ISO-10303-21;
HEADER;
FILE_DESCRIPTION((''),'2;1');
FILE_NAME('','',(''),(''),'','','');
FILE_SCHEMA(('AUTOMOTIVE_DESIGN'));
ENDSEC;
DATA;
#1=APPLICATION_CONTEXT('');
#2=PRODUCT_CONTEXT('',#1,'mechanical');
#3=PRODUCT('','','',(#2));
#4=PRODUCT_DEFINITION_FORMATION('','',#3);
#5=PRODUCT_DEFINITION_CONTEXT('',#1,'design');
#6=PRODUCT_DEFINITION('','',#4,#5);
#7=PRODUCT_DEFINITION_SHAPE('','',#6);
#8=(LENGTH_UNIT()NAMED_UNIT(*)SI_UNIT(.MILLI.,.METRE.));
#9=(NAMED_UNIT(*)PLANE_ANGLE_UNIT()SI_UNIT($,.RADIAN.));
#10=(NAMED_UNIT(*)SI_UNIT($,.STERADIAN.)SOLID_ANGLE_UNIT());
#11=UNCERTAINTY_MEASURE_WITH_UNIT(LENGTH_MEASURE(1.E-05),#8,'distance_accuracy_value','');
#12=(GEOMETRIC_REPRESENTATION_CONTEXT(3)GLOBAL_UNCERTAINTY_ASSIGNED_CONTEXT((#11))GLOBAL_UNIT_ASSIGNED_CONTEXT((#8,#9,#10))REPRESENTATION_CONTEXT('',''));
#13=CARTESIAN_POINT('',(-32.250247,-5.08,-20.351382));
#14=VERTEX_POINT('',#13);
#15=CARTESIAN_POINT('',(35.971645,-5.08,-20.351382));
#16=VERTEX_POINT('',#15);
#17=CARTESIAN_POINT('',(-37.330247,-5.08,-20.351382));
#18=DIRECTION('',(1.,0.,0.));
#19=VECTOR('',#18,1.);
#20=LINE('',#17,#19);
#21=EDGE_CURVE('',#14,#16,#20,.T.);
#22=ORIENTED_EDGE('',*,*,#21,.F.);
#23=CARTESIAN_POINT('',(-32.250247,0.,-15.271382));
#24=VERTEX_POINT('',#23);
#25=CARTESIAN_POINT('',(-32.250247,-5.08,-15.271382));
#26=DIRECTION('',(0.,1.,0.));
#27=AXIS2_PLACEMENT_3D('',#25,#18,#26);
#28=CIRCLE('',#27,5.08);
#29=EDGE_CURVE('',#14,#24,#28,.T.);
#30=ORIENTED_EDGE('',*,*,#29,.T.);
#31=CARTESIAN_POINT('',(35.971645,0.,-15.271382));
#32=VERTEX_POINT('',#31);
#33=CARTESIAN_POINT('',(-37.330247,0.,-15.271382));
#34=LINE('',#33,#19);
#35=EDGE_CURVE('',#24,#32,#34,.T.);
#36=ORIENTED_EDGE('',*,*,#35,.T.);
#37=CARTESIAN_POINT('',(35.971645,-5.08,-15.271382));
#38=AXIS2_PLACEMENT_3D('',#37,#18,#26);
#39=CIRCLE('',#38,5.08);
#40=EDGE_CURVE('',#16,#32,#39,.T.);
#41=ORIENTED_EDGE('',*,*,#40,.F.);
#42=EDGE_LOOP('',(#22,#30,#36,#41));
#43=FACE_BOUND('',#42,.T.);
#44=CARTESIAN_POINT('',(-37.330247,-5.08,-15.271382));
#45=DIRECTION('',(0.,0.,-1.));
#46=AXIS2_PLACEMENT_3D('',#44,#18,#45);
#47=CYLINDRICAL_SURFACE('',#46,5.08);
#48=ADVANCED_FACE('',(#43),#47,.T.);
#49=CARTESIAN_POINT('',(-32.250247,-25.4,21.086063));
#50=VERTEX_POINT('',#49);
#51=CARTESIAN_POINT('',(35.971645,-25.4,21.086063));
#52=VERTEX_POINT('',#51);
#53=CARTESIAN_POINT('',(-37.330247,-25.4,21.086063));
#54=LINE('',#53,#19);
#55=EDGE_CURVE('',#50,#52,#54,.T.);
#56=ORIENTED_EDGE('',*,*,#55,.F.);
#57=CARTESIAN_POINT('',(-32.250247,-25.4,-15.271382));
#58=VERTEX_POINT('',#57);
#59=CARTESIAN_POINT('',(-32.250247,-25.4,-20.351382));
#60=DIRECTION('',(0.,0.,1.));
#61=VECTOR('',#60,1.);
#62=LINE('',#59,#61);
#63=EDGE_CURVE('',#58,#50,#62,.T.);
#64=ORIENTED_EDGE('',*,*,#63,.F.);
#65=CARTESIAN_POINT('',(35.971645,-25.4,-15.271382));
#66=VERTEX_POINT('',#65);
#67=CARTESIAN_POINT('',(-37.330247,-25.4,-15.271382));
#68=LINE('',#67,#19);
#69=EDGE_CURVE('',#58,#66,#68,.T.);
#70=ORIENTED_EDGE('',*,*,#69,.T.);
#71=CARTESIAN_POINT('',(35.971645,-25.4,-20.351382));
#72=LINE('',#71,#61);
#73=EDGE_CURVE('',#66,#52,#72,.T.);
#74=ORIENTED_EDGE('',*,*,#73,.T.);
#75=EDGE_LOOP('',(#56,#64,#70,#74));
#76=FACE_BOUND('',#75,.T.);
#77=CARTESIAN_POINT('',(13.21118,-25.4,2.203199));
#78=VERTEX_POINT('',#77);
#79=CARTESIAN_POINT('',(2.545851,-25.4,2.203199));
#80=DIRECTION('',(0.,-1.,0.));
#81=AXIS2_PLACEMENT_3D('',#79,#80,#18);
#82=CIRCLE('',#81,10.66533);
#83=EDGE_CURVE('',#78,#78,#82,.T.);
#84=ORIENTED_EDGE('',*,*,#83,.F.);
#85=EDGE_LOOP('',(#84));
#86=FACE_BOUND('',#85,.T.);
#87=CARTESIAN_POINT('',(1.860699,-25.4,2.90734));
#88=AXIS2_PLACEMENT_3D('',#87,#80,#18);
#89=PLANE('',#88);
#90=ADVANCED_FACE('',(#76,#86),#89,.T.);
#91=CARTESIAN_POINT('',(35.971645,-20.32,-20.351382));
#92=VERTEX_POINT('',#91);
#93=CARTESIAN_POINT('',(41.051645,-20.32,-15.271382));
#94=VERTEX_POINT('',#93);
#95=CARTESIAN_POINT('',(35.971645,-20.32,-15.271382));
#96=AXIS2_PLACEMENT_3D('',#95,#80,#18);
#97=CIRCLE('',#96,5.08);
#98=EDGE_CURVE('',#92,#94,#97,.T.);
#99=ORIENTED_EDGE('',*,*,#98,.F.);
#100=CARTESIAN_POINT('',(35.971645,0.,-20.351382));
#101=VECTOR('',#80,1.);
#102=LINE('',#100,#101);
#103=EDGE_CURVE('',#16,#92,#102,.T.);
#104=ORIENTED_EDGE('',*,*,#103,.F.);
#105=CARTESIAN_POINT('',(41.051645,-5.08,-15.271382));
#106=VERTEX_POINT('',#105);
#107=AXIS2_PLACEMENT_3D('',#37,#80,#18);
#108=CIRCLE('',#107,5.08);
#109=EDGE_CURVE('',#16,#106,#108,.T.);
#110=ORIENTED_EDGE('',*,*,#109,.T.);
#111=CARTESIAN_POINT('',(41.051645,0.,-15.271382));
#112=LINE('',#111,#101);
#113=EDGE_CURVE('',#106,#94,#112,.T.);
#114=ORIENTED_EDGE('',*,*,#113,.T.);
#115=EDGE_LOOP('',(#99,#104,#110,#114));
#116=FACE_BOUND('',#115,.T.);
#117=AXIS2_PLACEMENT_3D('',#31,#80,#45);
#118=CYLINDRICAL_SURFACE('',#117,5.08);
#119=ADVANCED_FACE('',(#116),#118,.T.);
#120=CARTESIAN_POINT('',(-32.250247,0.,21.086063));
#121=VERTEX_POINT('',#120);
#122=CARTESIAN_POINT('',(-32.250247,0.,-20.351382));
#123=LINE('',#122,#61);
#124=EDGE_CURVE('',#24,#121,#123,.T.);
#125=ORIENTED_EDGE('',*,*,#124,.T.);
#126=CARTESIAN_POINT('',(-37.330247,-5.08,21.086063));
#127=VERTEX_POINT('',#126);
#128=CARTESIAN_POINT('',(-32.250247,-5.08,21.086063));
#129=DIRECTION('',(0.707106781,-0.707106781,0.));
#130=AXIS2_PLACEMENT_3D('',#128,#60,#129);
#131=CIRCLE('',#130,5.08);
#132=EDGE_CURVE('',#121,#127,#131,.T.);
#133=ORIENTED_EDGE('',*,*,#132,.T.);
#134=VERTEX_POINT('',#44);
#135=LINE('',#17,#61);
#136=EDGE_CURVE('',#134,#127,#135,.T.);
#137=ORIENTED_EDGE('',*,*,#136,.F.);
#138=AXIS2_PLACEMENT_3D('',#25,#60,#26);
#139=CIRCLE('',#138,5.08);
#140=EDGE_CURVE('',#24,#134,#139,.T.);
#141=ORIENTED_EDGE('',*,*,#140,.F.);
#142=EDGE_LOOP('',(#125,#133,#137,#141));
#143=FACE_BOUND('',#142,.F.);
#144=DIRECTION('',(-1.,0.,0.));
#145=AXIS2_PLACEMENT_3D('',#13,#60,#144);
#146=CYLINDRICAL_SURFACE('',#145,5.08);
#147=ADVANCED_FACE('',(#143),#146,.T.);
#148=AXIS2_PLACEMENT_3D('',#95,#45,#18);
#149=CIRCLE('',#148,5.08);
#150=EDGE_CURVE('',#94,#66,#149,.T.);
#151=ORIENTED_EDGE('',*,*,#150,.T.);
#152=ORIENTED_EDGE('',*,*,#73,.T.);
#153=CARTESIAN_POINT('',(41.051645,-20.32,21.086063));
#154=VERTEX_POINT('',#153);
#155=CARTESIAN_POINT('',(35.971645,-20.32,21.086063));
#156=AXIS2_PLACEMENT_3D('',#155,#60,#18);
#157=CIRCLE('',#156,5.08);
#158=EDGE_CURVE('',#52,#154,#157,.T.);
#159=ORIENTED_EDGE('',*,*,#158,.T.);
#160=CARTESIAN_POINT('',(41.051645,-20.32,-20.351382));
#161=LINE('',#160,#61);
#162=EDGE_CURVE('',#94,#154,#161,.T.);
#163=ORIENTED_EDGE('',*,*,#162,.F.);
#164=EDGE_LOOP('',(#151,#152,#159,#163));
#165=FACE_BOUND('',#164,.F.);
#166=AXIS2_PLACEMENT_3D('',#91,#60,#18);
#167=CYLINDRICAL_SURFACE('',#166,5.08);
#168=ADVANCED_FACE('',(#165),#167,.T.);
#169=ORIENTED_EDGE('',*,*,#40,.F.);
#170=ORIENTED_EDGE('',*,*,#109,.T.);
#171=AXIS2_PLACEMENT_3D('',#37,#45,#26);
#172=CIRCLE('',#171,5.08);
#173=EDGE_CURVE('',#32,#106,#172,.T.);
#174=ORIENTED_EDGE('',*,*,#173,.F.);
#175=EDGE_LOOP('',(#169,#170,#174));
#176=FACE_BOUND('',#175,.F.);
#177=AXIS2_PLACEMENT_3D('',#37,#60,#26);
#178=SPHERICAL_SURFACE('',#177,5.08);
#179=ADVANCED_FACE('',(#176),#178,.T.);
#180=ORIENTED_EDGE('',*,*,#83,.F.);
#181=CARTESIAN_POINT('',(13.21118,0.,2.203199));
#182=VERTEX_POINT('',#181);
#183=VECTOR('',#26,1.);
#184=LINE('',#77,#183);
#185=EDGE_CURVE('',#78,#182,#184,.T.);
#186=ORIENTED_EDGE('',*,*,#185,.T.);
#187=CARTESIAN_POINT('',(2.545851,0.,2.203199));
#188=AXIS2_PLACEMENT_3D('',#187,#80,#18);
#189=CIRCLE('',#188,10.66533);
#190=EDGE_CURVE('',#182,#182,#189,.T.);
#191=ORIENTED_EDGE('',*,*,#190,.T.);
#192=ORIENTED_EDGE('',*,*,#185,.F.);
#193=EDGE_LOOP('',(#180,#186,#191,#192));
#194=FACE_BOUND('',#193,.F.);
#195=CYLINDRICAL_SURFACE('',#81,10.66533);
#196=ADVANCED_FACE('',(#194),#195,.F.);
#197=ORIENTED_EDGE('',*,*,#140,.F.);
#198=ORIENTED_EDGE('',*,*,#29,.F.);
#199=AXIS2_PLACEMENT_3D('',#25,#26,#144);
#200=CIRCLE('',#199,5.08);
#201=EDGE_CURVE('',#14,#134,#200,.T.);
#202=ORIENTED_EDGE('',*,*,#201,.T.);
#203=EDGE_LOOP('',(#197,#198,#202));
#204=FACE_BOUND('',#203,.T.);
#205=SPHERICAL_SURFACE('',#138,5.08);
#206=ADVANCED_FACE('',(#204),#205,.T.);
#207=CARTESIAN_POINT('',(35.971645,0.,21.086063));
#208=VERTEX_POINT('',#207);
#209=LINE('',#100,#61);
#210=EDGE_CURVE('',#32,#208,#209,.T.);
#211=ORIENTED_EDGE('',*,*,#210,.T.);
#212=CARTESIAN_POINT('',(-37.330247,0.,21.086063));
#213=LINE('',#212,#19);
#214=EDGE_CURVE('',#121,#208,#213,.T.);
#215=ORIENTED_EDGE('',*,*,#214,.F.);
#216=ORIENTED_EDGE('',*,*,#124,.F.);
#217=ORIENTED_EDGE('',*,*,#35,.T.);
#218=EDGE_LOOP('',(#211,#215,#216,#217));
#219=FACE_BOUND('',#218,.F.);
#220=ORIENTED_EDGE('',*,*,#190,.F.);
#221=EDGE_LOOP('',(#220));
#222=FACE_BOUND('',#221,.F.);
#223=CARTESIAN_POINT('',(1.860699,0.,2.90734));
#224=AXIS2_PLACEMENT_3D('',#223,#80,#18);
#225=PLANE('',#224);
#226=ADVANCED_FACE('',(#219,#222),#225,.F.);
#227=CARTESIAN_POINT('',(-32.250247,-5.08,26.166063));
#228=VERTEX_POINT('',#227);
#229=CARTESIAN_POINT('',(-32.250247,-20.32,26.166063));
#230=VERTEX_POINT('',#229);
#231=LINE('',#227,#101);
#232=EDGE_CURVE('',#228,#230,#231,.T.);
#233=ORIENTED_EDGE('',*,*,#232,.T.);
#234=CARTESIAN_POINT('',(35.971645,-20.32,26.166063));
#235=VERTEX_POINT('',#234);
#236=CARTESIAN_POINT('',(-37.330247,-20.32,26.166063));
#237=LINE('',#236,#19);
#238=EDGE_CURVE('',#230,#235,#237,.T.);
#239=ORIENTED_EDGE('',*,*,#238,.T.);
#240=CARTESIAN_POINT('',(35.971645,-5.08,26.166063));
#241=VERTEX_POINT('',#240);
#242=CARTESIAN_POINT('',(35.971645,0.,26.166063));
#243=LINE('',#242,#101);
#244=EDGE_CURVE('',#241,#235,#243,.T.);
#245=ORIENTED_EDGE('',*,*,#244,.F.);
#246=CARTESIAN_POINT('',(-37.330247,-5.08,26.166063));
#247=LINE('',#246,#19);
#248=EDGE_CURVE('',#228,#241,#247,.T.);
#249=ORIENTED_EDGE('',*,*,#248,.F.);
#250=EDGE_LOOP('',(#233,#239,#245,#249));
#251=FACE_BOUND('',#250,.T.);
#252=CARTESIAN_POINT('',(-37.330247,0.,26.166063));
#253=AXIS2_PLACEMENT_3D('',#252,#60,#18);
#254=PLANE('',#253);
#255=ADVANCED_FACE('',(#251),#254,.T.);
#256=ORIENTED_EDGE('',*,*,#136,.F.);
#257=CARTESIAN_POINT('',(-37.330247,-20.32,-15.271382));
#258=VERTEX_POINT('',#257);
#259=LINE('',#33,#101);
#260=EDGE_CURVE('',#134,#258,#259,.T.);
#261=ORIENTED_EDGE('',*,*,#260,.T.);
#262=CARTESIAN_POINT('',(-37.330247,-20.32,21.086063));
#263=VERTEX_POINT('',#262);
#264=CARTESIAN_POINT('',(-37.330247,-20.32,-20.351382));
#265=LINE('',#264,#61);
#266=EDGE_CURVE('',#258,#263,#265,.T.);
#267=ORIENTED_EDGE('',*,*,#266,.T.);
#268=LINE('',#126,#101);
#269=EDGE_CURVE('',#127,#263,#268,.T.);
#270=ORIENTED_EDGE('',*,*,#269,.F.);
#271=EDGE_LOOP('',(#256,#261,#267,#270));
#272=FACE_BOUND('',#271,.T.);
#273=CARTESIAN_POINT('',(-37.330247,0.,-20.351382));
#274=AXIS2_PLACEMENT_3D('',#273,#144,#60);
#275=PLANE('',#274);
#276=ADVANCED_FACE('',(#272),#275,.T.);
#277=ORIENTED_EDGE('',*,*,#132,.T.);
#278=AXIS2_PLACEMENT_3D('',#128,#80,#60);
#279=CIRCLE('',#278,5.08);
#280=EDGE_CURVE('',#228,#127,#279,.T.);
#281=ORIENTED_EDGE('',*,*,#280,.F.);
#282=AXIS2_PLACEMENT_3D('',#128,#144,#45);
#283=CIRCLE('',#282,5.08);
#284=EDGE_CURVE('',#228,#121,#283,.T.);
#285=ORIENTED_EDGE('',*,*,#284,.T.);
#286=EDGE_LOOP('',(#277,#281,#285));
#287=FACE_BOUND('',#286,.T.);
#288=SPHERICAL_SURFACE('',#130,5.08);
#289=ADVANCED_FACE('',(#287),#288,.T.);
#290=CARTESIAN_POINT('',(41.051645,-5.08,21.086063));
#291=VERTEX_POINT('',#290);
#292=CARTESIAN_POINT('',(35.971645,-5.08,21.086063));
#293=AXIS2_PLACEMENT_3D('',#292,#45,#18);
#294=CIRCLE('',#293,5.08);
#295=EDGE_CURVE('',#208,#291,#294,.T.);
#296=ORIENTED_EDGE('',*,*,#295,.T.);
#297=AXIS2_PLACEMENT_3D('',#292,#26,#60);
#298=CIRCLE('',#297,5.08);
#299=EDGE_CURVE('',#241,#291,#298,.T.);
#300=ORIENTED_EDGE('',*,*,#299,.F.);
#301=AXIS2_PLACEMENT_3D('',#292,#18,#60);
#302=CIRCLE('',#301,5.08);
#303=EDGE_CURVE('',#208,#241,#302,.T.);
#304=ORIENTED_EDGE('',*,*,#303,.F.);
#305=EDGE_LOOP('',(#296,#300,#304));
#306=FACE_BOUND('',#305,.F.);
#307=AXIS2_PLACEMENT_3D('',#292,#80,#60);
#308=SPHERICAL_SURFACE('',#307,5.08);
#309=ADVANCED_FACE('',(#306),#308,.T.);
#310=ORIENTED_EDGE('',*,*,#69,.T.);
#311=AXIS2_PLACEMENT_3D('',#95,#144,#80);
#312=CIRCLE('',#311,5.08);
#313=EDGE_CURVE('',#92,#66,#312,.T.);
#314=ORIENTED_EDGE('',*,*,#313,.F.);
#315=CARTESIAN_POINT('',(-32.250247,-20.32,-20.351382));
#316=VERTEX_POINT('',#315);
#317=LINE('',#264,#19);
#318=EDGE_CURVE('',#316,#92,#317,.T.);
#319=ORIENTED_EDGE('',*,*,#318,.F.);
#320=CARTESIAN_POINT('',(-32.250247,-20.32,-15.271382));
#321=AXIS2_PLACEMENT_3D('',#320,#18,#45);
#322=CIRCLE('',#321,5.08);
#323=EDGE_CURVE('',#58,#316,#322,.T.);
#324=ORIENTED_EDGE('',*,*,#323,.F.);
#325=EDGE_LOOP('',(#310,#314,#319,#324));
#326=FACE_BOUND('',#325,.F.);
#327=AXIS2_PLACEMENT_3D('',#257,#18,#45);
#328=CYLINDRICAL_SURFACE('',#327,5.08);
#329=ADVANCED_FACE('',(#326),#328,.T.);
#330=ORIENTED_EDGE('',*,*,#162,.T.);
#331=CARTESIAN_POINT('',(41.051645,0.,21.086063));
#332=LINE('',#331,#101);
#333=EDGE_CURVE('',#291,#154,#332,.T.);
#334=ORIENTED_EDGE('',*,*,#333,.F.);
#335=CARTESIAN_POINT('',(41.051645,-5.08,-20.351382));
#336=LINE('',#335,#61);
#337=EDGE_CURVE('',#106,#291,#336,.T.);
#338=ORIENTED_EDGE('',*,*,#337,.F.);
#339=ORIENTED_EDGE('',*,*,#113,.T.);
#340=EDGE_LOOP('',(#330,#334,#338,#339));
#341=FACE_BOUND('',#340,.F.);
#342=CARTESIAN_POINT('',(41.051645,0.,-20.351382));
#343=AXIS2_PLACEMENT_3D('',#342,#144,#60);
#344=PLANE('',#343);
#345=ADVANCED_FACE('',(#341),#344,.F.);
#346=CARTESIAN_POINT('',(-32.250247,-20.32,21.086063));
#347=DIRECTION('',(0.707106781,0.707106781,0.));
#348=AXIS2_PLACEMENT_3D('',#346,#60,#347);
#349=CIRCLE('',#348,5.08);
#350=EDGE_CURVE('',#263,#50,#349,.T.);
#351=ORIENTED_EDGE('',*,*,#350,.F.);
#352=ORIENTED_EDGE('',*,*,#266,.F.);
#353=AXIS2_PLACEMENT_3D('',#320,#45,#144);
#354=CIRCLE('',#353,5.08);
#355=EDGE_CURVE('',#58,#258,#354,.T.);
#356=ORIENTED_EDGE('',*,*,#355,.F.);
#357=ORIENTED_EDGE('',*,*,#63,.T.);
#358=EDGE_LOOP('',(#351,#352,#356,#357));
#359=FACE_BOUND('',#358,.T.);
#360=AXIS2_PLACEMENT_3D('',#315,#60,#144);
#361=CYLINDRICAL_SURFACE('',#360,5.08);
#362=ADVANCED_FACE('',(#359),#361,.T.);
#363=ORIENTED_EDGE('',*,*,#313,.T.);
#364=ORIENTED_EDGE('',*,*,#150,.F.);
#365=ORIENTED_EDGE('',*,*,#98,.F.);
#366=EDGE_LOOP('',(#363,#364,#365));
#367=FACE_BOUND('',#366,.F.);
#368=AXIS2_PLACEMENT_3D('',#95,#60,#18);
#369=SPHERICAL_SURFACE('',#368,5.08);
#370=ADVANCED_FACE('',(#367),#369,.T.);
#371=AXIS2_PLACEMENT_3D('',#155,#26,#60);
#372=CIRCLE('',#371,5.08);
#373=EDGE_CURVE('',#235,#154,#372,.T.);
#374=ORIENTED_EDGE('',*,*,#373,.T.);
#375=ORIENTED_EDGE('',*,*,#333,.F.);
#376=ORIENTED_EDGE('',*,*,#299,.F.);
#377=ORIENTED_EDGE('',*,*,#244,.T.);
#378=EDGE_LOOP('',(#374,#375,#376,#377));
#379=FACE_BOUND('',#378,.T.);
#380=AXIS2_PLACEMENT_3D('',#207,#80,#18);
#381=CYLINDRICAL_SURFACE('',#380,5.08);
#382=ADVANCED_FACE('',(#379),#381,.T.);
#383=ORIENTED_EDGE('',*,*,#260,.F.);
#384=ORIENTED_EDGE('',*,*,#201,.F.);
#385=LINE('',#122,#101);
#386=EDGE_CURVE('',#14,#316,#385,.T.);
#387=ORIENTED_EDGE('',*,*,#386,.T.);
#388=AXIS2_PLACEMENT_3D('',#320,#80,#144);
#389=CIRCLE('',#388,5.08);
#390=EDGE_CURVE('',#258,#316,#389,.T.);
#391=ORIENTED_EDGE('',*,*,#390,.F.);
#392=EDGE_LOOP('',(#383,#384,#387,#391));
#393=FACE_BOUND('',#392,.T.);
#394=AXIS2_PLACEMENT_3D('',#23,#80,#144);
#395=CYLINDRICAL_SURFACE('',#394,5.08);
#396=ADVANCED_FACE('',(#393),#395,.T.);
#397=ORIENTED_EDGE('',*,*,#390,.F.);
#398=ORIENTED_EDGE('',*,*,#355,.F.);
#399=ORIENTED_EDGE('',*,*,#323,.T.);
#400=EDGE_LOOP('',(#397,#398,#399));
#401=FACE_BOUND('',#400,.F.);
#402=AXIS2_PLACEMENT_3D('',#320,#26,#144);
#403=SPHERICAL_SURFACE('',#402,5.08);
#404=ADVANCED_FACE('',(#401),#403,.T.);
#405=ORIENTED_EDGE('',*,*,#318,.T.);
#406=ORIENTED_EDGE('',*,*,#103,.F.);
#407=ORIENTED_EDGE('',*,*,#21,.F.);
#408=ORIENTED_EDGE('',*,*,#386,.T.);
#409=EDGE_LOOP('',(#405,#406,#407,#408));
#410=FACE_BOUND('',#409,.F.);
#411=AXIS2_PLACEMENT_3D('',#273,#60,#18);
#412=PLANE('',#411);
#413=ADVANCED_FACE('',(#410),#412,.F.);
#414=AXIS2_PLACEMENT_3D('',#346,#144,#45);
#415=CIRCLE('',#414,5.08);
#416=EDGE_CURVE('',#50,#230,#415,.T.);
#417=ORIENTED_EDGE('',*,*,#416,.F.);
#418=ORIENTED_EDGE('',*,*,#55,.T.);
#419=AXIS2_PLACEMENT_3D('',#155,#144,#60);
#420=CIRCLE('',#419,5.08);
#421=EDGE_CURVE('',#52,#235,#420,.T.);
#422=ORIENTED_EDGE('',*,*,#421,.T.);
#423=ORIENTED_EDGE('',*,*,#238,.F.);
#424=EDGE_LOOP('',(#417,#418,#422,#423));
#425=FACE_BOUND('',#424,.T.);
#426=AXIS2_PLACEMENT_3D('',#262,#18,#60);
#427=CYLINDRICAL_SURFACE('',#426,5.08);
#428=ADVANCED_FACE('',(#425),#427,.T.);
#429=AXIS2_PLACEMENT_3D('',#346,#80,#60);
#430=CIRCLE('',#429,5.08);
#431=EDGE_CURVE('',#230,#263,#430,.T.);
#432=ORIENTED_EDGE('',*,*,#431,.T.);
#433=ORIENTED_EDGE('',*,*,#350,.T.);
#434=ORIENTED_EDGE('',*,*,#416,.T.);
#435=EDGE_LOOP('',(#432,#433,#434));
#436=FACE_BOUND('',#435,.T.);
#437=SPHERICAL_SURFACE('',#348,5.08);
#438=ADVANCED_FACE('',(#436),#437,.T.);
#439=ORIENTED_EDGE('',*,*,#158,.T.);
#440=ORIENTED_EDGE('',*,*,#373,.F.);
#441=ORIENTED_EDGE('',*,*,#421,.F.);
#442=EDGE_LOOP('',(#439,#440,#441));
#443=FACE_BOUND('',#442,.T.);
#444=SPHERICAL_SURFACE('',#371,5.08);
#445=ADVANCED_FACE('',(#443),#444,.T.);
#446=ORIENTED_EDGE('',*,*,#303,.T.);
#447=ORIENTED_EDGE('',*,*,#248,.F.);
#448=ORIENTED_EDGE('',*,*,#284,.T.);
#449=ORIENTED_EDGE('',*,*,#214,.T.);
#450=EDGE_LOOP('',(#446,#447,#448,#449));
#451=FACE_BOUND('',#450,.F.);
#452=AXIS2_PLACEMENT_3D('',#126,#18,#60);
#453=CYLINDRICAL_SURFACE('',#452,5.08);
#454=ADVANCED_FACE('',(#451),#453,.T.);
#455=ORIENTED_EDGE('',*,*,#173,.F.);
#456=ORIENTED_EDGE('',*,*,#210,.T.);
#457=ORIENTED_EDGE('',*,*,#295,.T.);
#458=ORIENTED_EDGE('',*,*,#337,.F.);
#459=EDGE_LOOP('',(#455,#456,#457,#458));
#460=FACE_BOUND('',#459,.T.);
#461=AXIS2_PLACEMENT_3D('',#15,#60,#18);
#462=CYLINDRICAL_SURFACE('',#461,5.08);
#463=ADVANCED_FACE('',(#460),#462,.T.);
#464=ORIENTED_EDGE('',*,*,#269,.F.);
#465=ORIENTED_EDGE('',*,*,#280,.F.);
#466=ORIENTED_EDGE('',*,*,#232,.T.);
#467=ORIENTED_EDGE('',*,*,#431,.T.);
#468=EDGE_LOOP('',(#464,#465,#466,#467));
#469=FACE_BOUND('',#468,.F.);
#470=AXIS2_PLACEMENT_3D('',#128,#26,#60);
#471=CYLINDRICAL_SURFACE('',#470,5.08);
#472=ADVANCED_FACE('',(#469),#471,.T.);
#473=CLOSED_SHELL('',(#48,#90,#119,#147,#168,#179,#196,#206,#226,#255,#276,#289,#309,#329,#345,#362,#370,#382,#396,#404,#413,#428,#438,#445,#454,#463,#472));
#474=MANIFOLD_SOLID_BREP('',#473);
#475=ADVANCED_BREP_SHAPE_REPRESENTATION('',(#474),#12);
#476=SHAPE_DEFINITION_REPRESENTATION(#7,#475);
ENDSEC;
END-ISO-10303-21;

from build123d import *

# Parameters (mm, degrees)
F0_W         = 78.3818922937
F0_H         = 46.5174447745
F1_DEPTH     = 25.4
F2_R         = 5.08
F3_T1_DEPTH  = 15.24
F3_S5_W      = 5.08
F3_S5_H      = 5.08
F3_T6_DEPTH  = 5.08
F3_S11_W     = 5.08
F3_S11_H     = 5.08
F3_T12_DEPTH = 5.08
F4_R         = 10.6653295048
F5_DEPTH     = 25.4


# Not quite as in the source:
# - a fillet or chamfer that OpenCascade refuses, or shapes differently, is made with other operations: its cross-section is extruded or revolved along the edge and cut away or added


with BuildPart() as f1:
    # F0 (on Front) → F1 (new body)
    with BuildSketch(Plane.XZ):
        with Locations((1.8606986851, 2.9073404148)):
            Rectangle(F0_W, F0_H)
    extrude(amount=F1_DEPTH)

    # F2
    f2_edges = [f1.edges().sort_by_distance(p)[0] for p in [
        (41.051645, -12.7, 26.166063),
        (1.860699, -25.4, 26.166063),
        (1.860699, 0, 26.166063),
        (41.051645, -25.4, 2.90734),
        (41.051645, 0, 2.90734),
        (-37.330247, 0, 2.90734),
        (1.860699, 0, -20.351382),
        (41.051645, -12.7, -20.351382),
        (-37.330247, -12.7, -20.351382),
        (-37.330247, -25.4, 2.90734),
        (1.860699, -25.4, -20.351382),
    ]]
    fillet(f2_edges, radius=F2_R)

    # F3: fillet of radius 5.08 on 1 edges, made by hand

    # F3_s2 → F3_t1 (cut)
    with BuildSketch(Plane.XZ.offset(5.08)):
        with BuildLine():
            ThreePointArc((-32.2502474618, 26.1660628021), (-35.8423499102, 24.6781652505), (-37.3302474618, 21.0860628021))
            Line((-37.3302474618, 21.0860628021), (-37.3302474618, 26.1660628021))
            Line((-37.3302474618, 26.1660628021), (-32.2502474618, 26.1660628021))
        make_face()
    extrude(amount=F3_T1_DEPTH, mode=Mode.SUBTRACT)


with BuildPart() as f3_tool4:
    # F3_s5 → F3_t6 (new body)
    with BuildSketch(Plane.XY.offset(21.0860628021)):
        with Locations((-34.7902474618, -2.54)):
            Rectangle(F3_S5_W, F3_S5_H)
    extrude(amount=F3_T6_DEPTH)

    # F3_s7 → F3_t8 (revolve, cut)
    with BuildSketch(Plane(origin=(-32.2502474618, -5.08, 21.0860628021), x_dir=(0.7071067812, -0.7071067812, 0), z_dir=(-0.7071067812, -0.7071067812, 0))):
        with BuildLine():
            ThreePointArc((0, -5.08), (5.08, 0), (0, 5.08))
            Line((0, 5.08), (0, -5.08))
        make_face()
    revolve(axis=Axis((-32.2502474618, -5.08, 21.0860628021), (0, 0, 1)), mode=Mode.SUBTRACT)


with BuildPart() as f1_1:
    add(f1.part)

    # F3_t3: cut F3_tool4
    add(f3_tool4.part, mode=Mode.SUBTRACT)


with BuildPart() as f3_tool10:
    # F3_s11 → F3_t12 (new body)
    with BuildSketch(Plane.XY.offset(21.0860628021)):
        with Locations((-34.7902474618, -22.86)):
            Rectangle(F3_S11_W, F3_S11_H)
    extrude(amount=F3_T12_DEPTH)

    # F3_s13 → F3_t14 (revolve, cut)
    with BuildSketch(Plane(origin=(-32.2502474618, -20.32, 21.0860628021), x_dir=(0.7071067812, 0.7071067812, 0), z_dir=(0.7071067812, -0.7071067812, 0))):
        with BuildLine():
            ThreePointArc((0, -5.08), (5.08, 0), (0, 5.08))
            Line((0, 5.08), (0, -5.08))
        make_face()
    revolve(axis=Axis((-32.2502474618, -20.32, 21.0860628021), (0, 0, 1)), mode=Mode.SUBTRACT)


with BuildPart() as f1_2:
    add(f1_1.part)

    # F3_t9: cut F3_tool10
    add(f3_tool10.part, mode=Mode.SUBTRACT)

    # F4 (on face) → F5 (cut, through all)
    with BuildSketch(Plane.XZ.offset(25.4)):
        with Locations((2.5458505843, 2.2031988483)):
            Circle(F4_R)
    extrude(amount=-F5_DEPTH, mode=Mode.SUBTRACT)


solid = f1_2.part
